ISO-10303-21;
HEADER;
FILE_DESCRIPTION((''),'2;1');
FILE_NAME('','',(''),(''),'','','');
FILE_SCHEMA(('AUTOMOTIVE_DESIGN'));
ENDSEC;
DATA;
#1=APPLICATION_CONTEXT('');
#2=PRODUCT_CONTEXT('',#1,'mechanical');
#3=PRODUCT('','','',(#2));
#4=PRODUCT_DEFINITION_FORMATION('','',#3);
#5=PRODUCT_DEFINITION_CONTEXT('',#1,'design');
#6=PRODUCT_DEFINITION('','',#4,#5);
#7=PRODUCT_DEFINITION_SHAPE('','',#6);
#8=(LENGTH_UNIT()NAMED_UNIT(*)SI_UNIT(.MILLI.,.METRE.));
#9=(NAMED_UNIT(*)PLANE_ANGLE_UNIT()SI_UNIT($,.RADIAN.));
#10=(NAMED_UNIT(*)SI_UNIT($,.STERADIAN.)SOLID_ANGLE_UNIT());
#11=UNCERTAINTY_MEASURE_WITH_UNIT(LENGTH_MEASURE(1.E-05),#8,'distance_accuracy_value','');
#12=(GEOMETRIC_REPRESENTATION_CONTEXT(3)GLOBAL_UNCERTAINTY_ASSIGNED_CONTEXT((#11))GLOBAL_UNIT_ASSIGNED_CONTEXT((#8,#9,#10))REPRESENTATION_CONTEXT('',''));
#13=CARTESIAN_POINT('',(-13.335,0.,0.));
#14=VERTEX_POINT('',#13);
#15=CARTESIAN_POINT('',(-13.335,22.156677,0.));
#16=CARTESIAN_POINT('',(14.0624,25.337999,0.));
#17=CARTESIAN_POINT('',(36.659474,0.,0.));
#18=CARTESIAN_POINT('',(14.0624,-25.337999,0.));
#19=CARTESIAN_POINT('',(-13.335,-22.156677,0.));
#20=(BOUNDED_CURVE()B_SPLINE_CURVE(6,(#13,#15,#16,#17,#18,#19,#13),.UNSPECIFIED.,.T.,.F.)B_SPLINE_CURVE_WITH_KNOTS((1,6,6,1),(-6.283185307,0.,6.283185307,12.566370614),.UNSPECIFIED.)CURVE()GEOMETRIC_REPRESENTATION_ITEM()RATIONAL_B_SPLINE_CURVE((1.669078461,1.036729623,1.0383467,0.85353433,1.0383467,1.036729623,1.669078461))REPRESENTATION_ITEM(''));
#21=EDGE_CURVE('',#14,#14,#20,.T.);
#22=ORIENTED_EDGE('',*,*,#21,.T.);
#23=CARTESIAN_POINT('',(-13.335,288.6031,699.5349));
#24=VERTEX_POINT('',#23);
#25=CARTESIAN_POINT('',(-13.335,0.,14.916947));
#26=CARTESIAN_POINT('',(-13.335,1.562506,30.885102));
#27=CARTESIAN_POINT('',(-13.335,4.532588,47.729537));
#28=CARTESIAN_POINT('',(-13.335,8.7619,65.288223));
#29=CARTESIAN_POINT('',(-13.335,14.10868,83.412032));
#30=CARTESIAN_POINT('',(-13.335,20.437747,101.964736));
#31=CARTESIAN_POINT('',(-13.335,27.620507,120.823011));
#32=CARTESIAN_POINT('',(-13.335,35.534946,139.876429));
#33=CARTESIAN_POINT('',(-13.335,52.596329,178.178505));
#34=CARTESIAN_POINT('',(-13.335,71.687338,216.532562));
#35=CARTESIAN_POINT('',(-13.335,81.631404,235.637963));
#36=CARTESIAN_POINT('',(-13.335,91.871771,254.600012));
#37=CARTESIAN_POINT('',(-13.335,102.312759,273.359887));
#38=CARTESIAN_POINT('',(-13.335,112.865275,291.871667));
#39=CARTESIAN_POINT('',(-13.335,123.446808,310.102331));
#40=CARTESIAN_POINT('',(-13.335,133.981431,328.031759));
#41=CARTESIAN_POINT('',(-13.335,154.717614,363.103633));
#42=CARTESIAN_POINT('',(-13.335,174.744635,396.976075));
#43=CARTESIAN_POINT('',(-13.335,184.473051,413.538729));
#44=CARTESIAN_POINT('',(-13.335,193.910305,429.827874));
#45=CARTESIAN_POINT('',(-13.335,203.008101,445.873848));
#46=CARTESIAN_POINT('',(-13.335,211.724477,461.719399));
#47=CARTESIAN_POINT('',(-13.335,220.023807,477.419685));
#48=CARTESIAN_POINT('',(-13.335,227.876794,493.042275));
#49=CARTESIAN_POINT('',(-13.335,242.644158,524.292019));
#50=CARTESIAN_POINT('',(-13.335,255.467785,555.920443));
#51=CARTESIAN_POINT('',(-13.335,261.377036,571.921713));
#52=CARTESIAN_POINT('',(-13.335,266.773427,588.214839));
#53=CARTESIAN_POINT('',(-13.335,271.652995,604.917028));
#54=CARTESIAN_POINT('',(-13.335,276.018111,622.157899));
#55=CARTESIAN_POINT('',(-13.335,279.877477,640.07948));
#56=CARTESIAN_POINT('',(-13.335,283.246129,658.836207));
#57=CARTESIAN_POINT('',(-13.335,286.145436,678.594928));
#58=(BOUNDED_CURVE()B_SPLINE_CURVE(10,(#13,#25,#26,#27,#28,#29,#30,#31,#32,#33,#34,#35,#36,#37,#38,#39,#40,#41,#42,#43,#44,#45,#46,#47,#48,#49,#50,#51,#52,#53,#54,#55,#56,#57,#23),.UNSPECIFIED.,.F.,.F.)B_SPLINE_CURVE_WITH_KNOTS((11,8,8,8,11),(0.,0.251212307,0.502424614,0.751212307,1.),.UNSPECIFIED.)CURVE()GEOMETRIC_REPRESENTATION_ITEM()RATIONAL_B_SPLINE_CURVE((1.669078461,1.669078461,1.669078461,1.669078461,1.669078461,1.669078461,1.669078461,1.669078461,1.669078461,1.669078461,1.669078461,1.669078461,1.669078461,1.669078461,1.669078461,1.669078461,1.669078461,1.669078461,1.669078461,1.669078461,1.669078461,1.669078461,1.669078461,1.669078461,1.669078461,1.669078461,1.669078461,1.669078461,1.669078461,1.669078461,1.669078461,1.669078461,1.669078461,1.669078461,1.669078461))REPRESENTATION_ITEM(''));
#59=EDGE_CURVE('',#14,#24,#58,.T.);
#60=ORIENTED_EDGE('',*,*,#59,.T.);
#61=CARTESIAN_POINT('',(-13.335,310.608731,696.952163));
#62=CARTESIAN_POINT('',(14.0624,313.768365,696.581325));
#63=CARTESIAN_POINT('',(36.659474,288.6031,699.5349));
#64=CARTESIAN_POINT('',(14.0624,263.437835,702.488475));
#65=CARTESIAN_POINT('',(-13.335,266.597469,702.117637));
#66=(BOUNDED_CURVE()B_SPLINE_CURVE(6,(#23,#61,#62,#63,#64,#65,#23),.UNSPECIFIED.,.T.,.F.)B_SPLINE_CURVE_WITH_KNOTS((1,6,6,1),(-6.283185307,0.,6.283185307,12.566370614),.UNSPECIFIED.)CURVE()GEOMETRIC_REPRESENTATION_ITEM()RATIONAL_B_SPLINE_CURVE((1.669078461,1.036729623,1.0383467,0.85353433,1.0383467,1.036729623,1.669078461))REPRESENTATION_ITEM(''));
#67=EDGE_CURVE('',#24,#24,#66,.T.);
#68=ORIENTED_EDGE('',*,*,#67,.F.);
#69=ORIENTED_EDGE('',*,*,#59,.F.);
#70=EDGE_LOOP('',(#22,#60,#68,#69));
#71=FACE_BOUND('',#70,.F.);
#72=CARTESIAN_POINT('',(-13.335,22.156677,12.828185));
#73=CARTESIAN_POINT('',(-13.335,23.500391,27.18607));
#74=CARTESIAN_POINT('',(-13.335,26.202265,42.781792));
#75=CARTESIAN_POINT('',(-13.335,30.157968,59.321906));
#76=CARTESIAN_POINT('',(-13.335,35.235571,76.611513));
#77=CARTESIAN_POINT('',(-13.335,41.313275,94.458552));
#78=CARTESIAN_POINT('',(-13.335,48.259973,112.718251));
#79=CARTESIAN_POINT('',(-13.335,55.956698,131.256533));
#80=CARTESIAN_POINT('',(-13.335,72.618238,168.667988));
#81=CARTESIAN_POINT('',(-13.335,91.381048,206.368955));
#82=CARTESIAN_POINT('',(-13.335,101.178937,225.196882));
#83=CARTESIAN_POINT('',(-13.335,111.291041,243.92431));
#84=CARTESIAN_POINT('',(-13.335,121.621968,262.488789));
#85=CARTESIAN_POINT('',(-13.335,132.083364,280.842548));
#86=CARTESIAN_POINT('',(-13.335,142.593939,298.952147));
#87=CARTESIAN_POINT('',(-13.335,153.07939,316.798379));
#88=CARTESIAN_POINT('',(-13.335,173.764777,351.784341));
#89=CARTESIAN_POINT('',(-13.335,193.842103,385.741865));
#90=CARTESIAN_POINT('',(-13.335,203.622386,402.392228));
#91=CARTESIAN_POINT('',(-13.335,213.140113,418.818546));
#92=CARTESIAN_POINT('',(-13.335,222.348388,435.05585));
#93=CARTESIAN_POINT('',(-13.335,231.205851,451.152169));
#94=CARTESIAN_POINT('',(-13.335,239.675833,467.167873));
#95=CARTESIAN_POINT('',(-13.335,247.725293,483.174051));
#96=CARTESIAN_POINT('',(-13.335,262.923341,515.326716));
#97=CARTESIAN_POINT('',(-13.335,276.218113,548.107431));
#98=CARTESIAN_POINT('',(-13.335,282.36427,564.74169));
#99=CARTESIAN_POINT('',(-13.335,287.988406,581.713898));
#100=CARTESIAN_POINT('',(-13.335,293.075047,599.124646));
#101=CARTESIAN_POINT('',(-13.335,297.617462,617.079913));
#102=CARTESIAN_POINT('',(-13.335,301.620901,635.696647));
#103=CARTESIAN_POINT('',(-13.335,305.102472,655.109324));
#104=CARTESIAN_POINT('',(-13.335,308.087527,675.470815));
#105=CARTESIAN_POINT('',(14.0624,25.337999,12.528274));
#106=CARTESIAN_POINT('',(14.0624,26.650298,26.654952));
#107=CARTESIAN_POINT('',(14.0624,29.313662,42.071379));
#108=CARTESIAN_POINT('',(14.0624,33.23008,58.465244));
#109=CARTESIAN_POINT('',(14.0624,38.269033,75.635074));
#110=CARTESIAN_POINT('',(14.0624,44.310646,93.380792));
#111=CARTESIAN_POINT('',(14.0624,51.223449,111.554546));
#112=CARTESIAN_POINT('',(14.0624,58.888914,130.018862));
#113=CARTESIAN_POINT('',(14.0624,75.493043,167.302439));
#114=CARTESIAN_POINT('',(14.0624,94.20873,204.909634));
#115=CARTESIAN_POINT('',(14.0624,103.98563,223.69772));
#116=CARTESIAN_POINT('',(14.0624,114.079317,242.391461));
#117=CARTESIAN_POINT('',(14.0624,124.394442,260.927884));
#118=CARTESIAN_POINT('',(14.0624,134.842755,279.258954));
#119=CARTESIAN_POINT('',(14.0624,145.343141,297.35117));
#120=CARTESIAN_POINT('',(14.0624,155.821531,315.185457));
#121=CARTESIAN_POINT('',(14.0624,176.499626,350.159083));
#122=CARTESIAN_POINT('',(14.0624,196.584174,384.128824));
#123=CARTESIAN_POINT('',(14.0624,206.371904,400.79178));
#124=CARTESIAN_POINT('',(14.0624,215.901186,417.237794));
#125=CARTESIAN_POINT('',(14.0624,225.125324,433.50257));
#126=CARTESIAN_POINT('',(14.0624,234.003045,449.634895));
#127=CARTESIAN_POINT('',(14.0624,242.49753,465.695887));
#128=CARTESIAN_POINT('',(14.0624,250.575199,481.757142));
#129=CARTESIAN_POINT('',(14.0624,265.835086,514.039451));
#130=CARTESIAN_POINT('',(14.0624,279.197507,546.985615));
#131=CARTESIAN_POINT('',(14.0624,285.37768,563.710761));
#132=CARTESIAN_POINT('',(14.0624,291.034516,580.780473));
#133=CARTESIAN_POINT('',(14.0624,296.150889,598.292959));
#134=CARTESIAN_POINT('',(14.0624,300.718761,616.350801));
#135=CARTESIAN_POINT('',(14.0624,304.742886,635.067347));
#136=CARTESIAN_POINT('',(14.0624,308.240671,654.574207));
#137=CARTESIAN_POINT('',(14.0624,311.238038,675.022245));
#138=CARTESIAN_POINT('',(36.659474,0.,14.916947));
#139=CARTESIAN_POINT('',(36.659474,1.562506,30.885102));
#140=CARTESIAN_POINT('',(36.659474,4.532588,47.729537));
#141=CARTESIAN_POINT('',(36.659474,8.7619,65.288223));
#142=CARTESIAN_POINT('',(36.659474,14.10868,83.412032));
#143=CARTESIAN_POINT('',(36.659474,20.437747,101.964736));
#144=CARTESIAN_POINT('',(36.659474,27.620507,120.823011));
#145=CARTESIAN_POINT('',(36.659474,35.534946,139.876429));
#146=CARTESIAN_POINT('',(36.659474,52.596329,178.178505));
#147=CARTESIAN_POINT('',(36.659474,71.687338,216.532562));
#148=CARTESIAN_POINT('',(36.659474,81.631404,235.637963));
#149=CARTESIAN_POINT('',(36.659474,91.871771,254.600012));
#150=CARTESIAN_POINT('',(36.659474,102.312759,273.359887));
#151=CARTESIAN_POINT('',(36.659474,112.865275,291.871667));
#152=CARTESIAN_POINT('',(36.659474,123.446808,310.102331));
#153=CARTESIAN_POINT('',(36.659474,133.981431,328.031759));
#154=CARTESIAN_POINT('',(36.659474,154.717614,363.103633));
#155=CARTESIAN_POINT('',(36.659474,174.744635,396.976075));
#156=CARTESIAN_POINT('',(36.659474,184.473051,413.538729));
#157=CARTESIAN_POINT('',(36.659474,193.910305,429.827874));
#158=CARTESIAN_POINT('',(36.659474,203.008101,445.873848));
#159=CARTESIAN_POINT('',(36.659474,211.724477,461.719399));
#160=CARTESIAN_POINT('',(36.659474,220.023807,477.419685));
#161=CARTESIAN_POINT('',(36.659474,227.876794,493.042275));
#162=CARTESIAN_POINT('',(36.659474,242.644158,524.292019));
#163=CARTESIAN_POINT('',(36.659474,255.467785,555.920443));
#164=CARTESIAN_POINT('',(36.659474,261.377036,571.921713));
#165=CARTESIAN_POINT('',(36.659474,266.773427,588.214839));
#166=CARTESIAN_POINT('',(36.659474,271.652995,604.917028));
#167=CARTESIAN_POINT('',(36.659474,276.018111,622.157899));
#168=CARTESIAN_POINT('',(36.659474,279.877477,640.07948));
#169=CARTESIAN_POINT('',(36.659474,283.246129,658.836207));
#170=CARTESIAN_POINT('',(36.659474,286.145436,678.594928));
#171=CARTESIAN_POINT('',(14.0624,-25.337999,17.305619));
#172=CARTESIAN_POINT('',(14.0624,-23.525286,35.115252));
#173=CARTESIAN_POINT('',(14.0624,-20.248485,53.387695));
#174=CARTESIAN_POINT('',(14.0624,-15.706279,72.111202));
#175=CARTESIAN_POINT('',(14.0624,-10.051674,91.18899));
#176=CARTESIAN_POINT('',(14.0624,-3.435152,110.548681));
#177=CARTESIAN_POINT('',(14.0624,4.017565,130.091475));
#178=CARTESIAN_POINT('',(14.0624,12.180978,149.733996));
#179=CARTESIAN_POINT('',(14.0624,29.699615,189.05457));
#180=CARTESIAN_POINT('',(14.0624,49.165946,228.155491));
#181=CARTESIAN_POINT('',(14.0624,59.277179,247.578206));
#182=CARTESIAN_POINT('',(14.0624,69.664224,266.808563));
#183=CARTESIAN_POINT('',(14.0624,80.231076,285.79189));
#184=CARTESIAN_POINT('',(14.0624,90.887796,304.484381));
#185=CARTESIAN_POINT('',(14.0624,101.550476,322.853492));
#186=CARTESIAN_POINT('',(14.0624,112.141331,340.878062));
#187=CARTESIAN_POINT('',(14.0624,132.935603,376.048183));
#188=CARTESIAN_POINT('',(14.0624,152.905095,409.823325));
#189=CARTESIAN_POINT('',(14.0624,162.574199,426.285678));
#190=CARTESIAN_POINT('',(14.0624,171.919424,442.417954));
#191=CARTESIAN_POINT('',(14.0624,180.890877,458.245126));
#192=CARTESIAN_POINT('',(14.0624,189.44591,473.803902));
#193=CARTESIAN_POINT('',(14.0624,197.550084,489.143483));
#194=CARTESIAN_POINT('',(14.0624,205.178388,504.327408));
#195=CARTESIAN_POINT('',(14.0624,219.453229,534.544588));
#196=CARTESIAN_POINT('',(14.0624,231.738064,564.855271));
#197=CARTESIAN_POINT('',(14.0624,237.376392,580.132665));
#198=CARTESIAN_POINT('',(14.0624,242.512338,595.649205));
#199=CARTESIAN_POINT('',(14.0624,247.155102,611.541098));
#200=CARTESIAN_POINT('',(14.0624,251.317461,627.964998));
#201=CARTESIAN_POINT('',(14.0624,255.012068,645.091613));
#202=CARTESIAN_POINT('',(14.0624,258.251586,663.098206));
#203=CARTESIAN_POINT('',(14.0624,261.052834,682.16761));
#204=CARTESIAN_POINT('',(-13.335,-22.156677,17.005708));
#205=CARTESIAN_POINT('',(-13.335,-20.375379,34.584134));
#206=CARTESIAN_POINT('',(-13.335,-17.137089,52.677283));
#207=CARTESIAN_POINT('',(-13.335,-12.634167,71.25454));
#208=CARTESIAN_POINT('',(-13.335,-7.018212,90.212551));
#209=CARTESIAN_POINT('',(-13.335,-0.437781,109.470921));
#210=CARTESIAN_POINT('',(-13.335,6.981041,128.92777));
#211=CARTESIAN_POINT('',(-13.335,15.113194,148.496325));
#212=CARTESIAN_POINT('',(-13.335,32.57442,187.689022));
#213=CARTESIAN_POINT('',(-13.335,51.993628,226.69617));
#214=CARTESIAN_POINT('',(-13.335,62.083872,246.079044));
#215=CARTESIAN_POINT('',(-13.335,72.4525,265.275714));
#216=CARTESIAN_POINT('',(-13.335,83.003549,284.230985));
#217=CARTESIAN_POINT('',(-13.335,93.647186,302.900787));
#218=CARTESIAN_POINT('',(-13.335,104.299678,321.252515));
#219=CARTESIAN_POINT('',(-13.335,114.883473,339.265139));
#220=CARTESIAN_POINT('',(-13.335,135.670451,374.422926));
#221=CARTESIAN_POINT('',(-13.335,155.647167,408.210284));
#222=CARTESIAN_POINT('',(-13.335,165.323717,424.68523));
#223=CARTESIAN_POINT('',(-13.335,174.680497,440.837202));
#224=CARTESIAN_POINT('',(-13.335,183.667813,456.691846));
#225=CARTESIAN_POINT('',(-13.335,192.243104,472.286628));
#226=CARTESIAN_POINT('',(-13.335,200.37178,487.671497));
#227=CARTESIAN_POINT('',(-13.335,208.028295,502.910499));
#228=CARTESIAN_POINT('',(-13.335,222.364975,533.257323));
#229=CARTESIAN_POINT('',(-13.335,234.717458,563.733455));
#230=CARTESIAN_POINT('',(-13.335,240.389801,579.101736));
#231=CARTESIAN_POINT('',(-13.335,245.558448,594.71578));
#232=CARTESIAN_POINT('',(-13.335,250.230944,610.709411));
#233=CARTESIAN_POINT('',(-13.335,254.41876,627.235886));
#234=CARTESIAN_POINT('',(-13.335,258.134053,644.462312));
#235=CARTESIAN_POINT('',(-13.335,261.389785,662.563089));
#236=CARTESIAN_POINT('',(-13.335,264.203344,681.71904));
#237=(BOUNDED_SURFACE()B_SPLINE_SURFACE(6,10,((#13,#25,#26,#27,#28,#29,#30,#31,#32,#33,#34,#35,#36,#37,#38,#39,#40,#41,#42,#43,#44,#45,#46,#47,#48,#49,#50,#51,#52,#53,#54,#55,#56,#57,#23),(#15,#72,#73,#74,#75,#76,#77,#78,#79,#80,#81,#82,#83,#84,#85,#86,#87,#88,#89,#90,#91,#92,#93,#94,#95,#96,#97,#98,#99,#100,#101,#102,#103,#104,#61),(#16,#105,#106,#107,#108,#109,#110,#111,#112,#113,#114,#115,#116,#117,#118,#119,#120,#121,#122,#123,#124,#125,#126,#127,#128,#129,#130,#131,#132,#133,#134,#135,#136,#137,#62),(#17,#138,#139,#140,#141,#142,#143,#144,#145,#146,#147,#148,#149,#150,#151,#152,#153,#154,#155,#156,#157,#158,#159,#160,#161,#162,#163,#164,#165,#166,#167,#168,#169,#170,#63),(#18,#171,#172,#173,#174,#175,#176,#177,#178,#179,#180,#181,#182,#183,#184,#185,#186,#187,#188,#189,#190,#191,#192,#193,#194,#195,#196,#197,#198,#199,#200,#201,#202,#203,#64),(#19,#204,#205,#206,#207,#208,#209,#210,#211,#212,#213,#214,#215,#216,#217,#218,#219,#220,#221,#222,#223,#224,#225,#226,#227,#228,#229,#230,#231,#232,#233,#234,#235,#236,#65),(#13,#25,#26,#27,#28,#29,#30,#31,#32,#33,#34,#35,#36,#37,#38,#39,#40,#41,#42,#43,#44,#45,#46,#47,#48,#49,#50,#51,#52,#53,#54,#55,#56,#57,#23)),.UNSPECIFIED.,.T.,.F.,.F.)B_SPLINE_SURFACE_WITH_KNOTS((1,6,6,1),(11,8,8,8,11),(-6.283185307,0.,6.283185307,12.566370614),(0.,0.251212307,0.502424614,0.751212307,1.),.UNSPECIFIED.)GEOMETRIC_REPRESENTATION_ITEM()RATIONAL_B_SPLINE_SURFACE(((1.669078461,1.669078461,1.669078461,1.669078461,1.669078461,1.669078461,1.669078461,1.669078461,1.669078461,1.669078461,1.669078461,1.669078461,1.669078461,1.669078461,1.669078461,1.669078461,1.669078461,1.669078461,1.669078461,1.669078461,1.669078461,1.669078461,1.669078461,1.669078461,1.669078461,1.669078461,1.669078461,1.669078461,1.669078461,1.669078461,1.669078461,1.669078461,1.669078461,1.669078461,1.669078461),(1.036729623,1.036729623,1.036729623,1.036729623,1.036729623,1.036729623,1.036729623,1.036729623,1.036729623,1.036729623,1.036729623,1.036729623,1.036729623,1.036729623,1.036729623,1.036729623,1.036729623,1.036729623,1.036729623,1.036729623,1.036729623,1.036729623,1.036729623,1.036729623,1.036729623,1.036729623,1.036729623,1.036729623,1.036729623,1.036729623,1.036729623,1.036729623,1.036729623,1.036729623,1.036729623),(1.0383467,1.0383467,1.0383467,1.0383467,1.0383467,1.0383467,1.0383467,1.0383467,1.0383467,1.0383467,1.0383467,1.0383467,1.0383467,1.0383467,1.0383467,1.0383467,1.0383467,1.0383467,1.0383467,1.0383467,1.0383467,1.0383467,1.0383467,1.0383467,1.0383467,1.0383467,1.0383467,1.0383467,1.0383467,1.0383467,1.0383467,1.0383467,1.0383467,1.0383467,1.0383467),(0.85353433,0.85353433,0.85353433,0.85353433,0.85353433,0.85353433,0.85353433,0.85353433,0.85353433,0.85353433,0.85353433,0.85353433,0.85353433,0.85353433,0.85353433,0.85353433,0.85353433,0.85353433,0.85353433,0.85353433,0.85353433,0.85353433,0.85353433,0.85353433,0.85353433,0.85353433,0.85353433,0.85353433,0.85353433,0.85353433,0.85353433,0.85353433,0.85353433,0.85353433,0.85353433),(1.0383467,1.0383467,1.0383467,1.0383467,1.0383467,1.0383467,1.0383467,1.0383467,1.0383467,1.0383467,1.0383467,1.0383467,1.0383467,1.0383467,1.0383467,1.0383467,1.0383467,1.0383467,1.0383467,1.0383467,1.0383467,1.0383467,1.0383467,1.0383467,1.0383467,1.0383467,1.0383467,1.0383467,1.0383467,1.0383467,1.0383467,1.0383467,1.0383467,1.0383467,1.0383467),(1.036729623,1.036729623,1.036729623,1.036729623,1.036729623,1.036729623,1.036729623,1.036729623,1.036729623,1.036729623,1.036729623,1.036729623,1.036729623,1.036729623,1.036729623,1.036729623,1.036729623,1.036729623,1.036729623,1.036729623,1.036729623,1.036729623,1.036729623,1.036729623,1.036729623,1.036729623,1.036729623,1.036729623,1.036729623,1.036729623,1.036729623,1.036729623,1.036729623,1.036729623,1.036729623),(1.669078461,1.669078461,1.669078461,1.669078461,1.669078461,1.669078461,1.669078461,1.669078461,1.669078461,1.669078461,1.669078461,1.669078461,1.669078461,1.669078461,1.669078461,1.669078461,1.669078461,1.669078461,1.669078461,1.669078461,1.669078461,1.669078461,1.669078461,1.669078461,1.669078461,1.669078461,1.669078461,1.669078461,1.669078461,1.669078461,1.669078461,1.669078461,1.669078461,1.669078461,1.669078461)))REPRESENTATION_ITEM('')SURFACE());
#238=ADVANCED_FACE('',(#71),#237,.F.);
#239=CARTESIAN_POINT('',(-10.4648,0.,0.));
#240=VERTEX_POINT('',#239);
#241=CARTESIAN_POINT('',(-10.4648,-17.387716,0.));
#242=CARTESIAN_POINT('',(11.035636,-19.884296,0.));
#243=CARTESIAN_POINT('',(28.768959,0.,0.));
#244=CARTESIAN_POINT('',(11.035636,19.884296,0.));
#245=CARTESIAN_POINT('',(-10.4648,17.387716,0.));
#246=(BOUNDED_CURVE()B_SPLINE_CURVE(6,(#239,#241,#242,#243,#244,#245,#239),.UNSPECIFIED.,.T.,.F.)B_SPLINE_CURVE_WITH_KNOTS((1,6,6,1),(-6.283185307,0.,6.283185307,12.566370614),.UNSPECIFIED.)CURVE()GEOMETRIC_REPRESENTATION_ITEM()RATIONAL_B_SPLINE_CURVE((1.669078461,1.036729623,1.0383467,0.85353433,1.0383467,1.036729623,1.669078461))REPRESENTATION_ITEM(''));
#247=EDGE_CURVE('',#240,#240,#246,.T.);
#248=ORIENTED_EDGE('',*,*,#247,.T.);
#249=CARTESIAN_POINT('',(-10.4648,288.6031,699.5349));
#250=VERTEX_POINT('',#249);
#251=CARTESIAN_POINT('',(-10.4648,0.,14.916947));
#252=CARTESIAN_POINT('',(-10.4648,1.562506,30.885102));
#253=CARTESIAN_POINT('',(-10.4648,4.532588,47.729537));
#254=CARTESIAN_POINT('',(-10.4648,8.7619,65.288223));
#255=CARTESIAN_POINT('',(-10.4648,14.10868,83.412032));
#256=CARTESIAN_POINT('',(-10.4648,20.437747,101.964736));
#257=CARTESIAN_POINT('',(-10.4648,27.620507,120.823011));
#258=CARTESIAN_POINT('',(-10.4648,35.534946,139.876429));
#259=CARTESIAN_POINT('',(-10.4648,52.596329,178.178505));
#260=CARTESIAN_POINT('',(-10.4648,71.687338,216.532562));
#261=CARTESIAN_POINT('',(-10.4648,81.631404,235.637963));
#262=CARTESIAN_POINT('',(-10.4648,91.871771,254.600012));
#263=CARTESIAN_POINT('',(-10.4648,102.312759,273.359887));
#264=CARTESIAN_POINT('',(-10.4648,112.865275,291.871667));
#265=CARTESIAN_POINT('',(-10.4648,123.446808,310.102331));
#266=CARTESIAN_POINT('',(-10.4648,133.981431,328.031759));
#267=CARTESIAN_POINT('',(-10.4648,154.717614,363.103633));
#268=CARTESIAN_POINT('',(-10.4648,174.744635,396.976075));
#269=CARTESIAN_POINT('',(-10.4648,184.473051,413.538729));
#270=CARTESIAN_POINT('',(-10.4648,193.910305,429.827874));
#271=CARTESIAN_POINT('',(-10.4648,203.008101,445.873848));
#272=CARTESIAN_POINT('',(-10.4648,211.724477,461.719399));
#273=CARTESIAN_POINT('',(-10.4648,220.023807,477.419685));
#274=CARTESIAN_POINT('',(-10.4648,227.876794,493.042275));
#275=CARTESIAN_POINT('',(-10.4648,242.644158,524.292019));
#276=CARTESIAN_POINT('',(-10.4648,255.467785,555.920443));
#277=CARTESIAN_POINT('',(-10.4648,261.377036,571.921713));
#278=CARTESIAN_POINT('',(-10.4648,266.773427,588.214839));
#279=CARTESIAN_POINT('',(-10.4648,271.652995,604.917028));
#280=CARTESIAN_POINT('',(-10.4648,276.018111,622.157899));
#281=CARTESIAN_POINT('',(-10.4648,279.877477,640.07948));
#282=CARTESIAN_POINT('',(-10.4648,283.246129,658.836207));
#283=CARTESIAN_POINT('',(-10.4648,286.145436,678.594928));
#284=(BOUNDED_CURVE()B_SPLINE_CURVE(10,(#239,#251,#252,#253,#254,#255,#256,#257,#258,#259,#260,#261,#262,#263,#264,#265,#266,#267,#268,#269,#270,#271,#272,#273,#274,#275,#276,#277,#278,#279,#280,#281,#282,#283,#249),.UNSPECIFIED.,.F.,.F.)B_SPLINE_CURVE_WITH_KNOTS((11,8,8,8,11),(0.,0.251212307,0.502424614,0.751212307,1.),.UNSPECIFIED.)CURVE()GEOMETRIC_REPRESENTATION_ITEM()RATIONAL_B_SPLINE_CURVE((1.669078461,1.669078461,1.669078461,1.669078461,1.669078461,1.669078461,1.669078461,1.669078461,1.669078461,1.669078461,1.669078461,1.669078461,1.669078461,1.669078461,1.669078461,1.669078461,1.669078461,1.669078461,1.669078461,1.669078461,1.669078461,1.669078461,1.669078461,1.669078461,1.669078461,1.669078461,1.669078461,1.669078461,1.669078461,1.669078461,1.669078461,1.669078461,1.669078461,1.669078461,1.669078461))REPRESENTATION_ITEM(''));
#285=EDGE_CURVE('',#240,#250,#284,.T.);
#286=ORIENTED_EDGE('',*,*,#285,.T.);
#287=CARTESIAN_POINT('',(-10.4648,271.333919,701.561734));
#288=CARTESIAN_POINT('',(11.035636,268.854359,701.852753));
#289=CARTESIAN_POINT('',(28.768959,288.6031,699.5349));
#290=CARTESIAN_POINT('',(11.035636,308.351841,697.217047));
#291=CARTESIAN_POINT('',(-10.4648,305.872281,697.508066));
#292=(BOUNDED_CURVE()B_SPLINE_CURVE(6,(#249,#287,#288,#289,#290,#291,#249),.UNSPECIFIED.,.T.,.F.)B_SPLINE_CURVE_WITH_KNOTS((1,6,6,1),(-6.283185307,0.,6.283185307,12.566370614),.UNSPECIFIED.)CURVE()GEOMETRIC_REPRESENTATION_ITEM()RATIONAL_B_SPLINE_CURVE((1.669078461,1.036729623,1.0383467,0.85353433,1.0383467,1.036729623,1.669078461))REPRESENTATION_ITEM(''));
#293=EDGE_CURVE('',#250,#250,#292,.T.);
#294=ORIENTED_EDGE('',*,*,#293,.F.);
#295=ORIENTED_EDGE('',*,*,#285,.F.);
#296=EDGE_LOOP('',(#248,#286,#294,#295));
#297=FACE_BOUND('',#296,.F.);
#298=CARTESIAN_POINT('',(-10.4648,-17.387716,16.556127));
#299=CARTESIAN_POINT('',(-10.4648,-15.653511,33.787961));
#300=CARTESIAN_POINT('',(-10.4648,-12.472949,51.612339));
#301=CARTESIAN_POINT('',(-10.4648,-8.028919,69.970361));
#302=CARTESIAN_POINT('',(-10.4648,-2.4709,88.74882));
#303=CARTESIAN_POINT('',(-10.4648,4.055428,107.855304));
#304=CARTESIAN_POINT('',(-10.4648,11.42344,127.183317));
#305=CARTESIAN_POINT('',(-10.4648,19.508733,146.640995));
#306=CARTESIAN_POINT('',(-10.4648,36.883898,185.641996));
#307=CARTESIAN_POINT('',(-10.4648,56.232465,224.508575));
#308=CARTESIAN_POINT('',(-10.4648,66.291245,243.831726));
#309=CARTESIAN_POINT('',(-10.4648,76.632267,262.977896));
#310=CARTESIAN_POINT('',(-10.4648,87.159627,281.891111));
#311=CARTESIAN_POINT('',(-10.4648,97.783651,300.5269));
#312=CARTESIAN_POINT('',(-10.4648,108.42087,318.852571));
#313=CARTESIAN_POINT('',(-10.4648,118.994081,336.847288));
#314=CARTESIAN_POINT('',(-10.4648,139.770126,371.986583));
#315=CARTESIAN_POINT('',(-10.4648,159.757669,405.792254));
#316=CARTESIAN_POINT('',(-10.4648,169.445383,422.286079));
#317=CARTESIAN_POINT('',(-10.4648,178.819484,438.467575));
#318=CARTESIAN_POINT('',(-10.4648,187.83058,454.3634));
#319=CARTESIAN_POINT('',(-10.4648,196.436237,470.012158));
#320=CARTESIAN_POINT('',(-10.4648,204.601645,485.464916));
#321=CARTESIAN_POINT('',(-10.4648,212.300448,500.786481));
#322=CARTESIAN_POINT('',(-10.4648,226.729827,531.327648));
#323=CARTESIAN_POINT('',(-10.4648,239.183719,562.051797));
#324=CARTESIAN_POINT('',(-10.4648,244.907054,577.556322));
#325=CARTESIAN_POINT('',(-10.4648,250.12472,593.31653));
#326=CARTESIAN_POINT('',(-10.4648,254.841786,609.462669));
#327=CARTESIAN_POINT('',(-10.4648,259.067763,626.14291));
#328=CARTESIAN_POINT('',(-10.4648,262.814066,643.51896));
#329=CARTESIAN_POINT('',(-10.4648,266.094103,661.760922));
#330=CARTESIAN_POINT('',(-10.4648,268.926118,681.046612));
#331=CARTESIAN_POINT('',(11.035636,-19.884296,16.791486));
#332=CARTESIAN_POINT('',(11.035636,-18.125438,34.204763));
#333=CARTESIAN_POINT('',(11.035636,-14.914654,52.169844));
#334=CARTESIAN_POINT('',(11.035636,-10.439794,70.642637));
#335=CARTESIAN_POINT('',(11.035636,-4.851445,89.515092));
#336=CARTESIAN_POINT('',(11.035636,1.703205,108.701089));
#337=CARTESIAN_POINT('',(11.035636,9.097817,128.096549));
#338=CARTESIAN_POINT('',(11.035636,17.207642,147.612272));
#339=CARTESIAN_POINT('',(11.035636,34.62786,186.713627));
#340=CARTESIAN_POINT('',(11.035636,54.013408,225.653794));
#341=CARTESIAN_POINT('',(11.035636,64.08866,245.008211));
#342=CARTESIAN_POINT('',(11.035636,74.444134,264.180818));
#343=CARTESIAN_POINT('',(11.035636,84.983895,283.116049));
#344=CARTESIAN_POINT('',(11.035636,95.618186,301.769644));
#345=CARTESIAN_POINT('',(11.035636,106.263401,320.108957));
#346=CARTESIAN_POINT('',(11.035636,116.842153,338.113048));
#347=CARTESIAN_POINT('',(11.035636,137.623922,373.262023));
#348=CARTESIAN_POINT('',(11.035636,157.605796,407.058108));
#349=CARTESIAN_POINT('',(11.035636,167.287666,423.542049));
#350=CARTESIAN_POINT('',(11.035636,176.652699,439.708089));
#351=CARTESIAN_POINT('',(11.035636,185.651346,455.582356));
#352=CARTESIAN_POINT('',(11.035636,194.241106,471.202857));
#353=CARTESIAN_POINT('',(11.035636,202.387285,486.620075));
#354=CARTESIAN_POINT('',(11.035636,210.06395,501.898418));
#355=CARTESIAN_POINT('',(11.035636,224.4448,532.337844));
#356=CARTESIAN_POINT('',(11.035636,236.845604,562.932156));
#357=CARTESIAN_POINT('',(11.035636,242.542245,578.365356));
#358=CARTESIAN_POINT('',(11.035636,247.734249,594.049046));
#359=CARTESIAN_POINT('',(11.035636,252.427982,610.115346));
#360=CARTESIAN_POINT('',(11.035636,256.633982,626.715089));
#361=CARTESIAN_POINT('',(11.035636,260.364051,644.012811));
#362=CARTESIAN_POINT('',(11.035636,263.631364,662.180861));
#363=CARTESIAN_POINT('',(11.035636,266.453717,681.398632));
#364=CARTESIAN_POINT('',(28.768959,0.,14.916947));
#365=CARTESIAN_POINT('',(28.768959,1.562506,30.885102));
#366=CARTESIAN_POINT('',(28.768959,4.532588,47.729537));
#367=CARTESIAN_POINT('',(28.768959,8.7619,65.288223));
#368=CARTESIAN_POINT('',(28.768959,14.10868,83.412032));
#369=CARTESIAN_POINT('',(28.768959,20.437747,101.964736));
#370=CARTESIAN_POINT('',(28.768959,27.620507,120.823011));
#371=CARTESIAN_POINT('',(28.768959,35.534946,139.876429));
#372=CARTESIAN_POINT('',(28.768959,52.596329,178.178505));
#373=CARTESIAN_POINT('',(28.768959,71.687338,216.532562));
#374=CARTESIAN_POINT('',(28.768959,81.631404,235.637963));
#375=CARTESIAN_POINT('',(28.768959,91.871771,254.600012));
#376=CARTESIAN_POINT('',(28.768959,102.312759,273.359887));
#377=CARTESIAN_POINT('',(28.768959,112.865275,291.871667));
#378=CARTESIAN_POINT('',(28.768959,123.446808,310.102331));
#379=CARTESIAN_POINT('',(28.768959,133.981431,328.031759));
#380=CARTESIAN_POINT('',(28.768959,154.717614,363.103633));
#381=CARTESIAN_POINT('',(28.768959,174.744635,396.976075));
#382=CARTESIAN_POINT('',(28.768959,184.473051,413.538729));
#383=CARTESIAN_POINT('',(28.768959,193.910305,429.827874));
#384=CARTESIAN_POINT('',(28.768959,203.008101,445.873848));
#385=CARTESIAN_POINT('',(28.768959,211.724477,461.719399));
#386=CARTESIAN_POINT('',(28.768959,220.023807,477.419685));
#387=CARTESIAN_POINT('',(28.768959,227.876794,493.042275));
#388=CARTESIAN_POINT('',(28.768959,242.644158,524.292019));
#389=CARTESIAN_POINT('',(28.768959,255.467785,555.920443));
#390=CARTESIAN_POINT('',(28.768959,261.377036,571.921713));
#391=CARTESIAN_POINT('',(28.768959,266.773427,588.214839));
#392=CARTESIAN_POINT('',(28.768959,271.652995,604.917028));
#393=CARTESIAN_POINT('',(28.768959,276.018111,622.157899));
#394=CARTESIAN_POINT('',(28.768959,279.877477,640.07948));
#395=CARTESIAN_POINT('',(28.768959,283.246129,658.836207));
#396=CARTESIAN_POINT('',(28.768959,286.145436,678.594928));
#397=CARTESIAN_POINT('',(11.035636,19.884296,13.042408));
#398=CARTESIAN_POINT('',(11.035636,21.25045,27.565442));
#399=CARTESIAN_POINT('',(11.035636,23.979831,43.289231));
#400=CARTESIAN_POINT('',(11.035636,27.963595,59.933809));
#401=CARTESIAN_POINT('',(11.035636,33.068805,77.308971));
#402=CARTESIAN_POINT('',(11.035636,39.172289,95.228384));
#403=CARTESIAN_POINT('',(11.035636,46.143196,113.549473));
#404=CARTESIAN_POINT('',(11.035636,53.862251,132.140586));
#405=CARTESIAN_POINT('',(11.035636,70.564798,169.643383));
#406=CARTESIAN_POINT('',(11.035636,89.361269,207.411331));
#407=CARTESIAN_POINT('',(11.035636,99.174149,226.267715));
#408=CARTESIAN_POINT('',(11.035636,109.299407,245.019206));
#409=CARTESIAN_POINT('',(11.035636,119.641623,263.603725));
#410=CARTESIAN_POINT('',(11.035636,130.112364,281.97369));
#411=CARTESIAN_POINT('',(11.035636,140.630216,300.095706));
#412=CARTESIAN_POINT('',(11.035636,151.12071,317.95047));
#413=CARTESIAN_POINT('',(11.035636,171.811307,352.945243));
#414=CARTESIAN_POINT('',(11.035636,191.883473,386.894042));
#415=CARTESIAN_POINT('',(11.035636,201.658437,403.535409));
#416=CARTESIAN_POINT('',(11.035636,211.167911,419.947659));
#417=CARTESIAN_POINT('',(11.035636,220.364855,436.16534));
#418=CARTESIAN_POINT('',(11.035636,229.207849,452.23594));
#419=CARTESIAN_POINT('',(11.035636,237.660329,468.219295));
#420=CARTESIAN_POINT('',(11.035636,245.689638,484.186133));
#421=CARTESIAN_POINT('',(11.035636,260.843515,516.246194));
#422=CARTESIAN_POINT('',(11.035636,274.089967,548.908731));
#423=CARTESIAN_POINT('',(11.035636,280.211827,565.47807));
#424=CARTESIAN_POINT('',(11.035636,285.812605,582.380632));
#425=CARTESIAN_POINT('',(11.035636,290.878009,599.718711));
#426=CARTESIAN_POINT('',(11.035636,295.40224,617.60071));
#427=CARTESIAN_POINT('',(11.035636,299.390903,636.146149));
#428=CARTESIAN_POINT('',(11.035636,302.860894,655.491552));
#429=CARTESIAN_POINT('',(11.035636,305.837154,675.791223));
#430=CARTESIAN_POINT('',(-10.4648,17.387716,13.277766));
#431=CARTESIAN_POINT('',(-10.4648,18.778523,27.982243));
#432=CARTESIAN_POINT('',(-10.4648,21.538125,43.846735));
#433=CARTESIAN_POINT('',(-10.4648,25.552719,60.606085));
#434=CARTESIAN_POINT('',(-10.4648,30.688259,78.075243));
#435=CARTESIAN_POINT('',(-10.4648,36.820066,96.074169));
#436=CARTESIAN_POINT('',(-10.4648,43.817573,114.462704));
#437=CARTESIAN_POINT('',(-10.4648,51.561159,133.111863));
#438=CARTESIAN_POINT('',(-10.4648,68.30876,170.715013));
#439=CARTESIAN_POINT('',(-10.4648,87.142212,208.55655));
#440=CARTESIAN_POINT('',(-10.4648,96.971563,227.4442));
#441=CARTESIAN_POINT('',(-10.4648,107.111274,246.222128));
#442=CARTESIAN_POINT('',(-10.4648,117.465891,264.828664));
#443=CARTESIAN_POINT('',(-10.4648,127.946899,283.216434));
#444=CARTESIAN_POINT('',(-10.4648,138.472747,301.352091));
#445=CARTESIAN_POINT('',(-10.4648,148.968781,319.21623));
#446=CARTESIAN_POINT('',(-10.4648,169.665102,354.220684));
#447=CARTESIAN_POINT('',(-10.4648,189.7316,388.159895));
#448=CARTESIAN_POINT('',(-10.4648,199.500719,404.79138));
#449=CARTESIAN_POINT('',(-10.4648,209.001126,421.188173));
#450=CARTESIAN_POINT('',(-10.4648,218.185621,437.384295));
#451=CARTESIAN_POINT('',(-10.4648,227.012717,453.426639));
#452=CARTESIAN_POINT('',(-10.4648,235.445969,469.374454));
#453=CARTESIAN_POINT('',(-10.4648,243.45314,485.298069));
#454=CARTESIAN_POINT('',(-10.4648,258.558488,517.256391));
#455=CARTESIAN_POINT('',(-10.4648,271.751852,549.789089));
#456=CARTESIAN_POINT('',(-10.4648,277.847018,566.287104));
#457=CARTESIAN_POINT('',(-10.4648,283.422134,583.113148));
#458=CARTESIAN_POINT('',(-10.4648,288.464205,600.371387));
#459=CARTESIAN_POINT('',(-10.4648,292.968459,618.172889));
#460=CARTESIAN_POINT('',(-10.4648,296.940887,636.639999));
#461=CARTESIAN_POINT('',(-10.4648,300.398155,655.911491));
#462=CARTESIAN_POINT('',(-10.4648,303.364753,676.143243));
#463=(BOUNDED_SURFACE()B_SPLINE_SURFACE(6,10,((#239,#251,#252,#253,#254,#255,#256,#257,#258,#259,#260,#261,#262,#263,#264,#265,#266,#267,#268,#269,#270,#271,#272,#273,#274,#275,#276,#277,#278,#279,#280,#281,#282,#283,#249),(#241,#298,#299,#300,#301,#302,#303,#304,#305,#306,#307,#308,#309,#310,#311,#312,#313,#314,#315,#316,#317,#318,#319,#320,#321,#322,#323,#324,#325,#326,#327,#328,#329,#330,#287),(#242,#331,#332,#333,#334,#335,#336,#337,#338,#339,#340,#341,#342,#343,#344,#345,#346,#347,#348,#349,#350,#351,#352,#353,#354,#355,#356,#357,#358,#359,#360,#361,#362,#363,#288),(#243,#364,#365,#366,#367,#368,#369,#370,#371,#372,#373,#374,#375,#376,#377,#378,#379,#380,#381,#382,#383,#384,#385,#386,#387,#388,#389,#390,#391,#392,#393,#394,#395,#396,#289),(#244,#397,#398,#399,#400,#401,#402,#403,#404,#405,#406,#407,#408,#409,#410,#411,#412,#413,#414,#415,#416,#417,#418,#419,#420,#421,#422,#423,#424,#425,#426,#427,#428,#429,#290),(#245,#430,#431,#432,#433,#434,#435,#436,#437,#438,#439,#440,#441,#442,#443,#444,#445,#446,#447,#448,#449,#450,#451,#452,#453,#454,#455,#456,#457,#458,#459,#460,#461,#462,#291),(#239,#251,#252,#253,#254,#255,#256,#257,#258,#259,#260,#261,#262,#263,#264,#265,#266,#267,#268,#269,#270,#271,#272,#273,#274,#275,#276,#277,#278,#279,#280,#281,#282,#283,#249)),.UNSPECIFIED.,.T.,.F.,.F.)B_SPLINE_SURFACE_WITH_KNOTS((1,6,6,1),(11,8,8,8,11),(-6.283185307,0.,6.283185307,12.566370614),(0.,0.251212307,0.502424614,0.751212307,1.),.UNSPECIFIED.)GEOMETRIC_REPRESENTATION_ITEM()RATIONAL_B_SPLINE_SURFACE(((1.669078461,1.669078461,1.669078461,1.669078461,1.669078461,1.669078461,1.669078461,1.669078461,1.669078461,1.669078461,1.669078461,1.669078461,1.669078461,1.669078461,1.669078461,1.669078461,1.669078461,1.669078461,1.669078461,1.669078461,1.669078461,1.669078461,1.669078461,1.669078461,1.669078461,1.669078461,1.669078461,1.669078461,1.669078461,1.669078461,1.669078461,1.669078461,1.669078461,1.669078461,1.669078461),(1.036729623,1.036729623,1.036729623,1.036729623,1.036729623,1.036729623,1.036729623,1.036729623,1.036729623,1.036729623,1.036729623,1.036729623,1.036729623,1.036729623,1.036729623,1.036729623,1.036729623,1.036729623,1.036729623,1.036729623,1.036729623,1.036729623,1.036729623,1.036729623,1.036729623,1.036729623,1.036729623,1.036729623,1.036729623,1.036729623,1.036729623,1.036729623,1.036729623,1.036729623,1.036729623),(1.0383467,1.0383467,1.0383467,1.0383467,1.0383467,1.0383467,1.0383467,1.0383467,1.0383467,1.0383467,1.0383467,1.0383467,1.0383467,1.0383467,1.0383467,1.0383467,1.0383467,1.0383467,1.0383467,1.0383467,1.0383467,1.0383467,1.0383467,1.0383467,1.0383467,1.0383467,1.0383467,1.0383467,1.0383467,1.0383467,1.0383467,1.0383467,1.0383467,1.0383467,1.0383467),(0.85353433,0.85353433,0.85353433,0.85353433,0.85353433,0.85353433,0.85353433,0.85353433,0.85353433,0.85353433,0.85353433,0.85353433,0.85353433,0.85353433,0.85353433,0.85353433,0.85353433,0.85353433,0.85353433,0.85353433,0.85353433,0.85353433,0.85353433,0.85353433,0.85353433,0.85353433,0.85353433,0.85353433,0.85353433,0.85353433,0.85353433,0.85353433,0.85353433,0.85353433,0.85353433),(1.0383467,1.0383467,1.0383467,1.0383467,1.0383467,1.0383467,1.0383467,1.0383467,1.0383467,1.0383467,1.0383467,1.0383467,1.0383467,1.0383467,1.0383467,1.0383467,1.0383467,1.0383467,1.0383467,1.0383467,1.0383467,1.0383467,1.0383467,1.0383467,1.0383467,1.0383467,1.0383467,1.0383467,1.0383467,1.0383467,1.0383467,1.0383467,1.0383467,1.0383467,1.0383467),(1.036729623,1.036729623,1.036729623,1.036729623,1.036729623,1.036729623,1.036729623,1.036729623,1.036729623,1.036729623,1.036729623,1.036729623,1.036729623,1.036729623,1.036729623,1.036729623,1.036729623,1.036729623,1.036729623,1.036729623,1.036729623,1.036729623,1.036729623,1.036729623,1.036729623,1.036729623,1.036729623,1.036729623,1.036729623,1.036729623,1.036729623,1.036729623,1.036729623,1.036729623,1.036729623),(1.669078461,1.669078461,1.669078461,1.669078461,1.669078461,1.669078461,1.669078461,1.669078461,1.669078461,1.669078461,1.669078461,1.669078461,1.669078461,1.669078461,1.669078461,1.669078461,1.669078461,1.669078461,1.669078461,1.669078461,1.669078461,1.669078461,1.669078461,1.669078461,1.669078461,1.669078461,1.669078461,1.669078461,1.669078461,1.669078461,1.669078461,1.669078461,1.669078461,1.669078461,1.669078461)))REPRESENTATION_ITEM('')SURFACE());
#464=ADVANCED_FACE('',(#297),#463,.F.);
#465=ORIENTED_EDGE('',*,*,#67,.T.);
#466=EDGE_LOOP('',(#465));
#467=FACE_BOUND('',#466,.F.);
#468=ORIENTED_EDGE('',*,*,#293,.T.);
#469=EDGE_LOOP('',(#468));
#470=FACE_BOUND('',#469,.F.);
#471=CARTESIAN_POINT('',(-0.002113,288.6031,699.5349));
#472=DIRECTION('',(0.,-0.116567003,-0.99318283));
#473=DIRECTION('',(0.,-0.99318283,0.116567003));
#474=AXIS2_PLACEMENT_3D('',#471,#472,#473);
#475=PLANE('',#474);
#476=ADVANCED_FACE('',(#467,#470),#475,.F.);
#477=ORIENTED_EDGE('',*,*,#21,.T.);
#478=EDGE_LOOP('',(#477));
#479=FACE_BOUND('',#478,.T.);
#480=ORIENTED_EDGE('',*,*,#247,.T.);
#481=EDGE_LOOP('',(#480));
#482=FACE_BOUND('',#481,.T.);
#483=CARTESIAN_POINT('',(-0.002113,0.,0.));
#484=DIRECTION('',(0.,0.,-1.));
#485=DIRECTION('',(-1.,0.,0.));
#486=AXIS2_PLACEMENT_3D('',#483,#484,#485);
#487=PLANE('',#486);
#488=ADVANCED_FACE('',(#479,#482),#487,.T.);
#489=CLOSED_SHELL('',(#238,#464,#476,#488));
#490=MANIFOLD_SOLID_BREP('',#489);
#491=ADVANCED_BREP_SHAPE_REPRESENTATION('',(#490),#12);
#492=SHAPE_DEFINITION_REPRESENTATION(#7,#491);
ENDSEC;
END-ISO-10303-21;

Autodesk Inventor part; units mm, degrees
ref_plane "Plano inicial" through (0, 0, 0) normal (0, 0, 1) x (1, 0, 0)
ref_plane "Plano final" through (0, 0, 763.8319) normal (0, 0, 1) x (1, 0, 0)
sketch "Boceto" plane through (0, 0, 0) normal (0, 0, -1) x (-1, 0, 0)
  circle A0 centre (0, 0) radius 10.4648
  circle A1 centre (0, 0) radius 13.335
  dimension "d0" = 26.67
  dimension "d1" = 2.8702
sketch "Sketch3" plane through (0, 0, 0) normal (0, 0, 1) x (1, 0, 0)
  line L0 (0, 0) -> (10, 0)
ref_plane "Work Plane3" through (0, 0, 0) normal (0, -1, 0) x (1, 0, 0)
sketch "Sketch4" plane through (0, 0, 0) normal (0, -1, 0) x (1, 0, 0)
  line L0 (-2, 0) -> (12, 0)
  line L1 (-2, 763.8319) -> (12, 763.8319)
  dimension "d7" = 763.8319
ref_plane "Plano de trabajo de orientación" through (0, 0, 0) normal (0, 0, -1) x (-1, 0, 0)
sketch3d "Trayectoria de barrido"
  spline S0 degree 4 poles (0, 0, 0) (0, 0, 148.4496) (0, 185.6954, 421.8297) (0, 263.9067, 489.1148) (0, 288.6031, 699.5349) knots 0 0 0 0 0 1 1 1 1 1 weights 1 1 1 1 1
sweep "Cuerpo" add profiles "Boceto" path "Trayectoria de barrido"
equation "\"d0\" = G_H"
equation "\"d1\" = G_T"
equation "\"G_H\" = 26.67"
equation "\"G_T\" = 2.8702"
equation "\"G_L\" = d7"
equation "\"G_OFFSET_START\" = 0"
equation "\"G_OFFSET_END\" = 0"
equation "\"d5\" = G_OFFSET_END + B_L"
equation "\"B_L\" = 763.83194"
properties part number "ANSI - 3/4 x 0.113 - 30,072" material "Acero, suave"
